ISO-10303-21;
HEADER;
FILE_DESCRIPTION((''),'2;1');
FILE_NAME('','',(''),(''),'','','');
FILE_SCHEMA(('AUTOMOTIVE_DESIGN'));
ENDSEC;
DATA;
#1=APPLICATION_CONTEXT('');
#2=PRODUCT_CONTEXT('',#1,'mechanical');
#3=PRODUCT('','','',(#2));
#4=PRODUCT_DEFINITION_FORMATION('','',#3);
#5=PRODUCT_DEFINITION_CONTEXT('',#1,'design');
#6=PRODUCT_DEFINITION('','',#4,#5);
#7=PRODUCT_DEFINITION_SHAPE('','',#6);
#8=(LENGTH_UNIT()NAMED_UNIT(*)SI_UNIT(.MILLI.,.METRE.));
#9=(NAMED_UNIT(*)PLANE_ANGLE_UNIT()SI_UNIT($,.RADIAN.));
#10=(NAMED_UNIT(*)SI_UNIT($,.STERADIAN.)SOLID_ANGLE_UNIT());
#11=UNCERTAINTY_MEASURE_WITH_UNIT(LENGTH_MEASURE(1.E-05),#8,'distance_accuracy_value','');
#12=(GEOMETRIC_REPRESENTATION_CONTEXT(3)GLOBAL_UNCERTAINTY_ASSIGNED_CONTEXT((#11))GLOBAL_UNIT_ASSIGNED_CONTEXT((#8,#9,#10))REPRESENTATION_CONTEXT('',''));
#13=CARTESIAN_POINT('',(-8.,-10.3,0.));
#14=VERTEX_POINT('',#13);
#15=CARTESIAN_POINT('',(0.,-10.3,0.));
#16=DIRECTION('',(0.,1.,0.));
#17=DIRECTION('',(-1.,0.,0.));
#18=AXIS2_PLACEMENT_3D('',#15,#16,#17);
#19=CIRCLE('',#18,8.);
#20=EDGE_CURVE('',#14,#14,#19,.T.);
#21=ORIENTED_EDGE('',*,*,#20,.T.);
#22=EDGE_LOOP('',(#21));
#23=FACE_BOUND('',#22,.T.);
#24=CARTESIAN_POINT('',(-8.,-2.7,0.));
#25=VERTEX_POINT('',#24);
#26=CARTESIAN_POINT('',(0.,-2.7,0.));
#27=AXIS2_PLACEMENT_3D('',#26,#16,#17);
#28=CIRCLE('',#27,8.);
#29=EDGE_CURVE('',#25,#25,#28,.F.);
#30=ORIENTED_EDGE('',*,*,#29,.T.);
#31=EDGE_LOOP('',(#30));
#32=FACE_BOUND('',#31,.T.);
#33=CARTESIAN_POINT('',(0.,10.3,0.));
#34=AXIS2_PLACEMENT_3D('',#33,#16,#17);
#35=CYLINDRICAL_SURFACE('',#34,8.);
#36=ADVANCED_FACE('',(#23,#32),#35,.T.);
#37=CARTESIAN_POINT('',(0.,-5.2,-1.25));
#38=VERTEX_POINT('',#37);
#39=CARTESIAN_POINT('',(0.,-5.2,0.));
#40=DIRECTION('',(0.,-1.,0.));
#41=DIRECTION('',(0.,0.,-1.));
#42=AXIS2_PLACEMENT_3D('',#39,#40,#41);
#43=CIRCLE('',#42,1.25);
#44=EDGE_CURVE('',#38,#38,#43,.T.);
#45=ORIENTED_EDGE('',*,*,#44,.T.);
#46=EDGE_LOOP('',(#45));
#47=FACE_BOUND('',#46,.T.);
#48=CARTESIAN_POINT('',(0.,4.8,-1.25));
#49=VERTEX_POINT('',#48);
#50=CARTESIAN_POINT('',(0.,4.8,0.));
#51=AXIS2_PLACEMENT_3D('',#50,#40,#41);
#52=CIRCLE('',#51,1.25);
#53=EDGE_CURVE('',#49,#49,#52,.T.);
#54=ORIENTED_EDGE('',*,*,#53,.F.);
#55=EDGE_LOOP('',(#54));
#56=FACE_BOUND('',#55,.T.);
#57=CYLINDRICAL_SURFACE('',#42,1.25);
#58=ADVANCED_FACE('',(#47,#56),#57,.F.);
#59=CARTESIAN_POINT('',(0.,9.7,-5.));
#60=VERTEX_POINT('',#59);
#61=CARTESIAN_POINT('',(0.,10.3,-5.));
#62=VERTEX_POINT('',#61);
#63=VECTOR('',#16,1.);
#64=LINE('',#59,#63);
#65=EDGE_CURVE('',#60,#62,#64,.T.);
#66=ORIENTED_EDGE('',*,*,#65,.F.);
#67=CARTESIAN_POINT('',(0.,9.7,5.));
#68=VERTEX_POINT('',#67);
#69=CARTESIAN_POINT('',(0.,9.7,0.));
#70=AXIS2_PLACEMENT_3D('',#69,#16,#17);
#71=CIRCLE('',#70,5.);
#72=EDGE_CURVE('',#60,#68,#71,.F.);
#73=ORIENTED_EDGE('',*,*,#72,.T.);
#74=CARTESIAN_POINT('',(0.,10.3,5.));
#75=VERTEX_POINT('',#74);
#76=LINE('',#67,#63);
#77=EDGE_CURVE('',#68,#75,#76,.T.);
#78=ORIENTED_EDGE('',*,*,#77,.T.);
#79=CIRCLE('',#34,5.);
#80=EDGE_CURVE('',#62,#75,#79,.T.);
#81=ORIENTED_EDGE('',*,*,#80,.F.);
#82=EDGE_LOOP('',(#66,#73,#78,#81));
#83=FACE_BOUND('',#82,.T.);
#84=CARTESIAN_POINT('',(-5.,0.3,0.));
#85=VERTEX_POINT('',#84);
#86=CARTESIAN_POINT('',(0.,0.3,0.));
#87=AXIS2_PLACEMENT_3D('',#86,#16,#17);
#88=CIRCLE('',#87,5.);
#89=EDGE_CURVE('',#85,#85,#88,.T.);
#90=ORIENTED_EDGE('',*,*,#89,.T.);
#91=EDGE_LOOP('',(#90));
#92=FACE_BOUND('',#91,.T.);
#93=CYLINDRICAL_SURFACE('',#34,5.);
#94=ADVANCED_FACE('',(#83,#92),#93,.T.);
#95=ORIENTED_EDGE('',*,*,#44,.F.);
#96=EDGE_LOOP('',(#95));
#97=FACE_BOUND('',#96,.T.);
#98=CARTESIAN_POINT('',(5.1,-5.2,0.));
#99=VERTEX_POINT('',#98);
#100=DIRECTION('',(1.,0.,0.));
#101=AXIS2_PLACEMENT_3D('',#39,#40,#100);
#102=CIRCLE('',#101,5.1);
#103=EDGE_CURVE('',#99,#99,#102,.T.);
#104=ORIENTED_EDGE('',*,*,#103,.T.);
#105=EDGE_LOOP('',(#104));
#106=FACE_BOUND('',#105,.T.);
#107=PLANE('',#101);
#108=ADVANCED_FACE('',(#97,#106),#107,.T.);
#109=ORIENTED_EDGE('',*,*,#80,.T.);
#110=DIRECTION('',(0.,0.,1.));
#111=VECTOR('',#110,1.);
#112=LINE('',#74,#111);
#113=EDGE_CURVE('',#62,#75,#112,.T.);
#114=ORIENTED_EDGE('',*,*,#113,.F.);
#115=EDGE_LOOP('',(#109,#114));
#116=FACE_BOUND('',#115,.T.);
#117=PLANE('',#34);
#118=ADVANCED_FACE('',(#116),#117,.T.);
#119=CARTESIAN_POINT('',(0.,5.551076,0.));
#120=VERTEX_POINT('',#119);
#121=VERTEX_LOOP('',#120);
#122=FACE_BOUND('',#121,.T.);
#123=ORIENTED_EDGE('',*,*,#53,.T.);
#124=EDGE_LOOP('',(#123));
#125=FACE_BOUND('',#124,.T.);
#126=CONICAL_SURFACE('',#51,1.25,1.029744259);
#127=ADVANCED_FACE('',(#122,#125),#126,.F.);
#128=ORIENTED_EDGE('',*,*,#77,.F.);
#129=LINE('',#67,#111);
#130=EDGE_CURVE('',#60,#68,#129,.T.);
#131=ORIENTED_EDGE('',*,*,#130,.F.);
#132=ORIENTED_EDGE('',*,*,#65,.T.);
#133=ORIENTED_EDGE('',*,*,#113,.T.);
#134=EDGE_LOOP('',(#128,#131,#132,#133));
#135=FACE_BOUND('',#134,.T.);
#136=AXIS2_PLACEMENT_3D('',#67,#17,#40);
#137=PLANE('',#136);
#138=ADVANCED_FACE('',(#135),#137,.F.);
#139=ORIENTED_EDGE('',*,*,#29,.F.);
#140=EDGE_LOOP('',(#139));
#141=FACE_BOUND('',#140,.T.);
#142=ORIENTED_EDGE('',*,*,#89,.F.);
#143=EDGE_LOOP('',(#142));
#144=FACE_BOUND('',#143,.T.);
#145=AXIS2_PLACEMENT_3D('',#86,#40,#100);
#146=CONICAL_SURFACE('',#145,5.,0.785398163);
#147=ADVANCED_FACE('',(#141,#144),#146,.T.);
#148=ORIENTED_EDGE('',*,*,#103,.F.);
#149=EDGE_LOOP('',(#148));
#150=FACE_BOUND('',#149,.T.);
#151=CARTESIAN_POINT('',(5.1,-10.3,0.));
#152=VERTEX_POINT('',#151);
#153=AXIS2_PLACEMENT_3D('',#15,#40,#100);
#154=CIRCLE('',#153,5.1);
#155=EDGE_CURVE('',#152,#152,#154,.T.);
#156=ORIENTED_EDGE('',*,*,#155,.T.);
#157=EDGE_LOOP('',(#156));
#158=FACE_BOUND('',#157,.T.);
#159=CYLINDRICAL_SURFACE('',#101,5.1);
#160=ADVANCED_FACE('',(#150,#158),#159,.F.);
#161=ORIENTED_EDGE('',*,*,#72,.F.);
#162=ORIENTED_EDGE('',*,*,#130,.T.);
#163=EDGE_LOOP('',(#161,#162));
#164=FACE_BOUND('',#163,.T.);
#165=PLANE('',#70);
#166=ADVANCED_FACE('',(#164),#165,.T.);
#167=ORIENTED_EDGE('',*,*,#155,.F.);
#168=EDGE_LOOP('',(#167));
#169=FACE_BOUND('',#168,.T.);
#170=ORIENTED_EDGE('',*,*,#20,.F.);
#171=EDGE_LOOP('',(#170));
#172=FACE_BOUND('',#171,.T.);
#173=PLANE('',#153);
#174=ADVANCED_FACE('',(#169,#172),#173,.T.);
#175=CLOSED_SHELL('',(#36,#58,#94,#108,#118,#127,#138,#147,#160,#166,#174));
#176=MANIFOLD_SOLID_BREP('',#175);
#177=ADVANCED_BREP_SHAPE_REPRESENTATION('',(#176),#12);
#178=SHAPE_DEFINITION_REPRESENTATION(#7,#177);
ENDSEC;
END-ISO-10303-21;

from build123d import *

# Parameters (mm, degrees)
SKETCH_4_W             = 5
SKETCH_4_H             = 10
CUT_EXTRUDE_849_DEPTH  = 0.6
CHAMFER_1_SIZE         = 3
SKETCH_5_R             = 5.1
CUT_EXTRUDE_1019_DEPTH = 5.1
HOLE_WIZARD_M3_D       = 2.5
HOLE_WIZARD_M3_DEPTH   = 10
HOLE_WIZARD_M3_TIP     = 0.751075774


with BuildPart() as part:
    # Эскиз1 → Revolve 497 (revolve)
    with BuildSketch(Plane.XY):
        Polygon((0, 10.3), (-5, 10.3), (-5, 0.3), (-8, 0.3), (-8, -10.3), (0, -10.3), align=None)
    revolve(axis=Axis((0, 10.3, 0), (0, -1, 0)))

    # Эскиз4 → Cut-Extrude 849 (cut)
    with BuildSketch(Plane(origin=(0, 10.3, 0), x_dir=(1, 0, 0), z_dir=(0, 1, 0))):
        with Locations((2.5, 0)):
            Rectangle(SKETCH_4_W, SKETCH_4_H)
    extrude(amount=-CUT_EXTRUDE_849_DEPTH, mode=Mode.SUBTRACT)

    # Фаска1
    chamfer_1_edges = [part.edges().sort_by_distance(p)[0] for p in [
        (8, 0.3, 0),
    ]]
    chamfer(chamfer_1_edges, length=CHAMFER_1_SIZE - 0.0001)  # a hair under: the kernel refuses the full size

    # Эскиз5 → Cut-Extrude 1019 (cut)
    with BuildSketch(Plane.XZ.offset(10.3)):
        Circle(SKETCH_5_R)
    extrude(amount=-CUT_EXTRUDE_1019_DEPTH, mode=Mode.SUBTRACT)

    # Крепление магнита M3
    with Locations(Plane(origin=(0, -5.2, 0), x_dir=(-1, 0, 0), z_dir=(0, -1, 0))):
        with Locations((0, 0)):
            Hole(HOLE_WIZARD_M3_D / 2, depth=HOLE_WIZARD_M3_DEPTH)
            with Locations((0, 0, -(HOLE_WIZARD_M3_DEPTH + HOLE_WIZARD_M3_TIP / 2))):  # 118° drill point
                Cone(0, HOLE_WIZARD_M3_D / 2, HOLE_WIZARD_M3_TIP, mode=Mode.SUBTRACT)


solid = part.part
